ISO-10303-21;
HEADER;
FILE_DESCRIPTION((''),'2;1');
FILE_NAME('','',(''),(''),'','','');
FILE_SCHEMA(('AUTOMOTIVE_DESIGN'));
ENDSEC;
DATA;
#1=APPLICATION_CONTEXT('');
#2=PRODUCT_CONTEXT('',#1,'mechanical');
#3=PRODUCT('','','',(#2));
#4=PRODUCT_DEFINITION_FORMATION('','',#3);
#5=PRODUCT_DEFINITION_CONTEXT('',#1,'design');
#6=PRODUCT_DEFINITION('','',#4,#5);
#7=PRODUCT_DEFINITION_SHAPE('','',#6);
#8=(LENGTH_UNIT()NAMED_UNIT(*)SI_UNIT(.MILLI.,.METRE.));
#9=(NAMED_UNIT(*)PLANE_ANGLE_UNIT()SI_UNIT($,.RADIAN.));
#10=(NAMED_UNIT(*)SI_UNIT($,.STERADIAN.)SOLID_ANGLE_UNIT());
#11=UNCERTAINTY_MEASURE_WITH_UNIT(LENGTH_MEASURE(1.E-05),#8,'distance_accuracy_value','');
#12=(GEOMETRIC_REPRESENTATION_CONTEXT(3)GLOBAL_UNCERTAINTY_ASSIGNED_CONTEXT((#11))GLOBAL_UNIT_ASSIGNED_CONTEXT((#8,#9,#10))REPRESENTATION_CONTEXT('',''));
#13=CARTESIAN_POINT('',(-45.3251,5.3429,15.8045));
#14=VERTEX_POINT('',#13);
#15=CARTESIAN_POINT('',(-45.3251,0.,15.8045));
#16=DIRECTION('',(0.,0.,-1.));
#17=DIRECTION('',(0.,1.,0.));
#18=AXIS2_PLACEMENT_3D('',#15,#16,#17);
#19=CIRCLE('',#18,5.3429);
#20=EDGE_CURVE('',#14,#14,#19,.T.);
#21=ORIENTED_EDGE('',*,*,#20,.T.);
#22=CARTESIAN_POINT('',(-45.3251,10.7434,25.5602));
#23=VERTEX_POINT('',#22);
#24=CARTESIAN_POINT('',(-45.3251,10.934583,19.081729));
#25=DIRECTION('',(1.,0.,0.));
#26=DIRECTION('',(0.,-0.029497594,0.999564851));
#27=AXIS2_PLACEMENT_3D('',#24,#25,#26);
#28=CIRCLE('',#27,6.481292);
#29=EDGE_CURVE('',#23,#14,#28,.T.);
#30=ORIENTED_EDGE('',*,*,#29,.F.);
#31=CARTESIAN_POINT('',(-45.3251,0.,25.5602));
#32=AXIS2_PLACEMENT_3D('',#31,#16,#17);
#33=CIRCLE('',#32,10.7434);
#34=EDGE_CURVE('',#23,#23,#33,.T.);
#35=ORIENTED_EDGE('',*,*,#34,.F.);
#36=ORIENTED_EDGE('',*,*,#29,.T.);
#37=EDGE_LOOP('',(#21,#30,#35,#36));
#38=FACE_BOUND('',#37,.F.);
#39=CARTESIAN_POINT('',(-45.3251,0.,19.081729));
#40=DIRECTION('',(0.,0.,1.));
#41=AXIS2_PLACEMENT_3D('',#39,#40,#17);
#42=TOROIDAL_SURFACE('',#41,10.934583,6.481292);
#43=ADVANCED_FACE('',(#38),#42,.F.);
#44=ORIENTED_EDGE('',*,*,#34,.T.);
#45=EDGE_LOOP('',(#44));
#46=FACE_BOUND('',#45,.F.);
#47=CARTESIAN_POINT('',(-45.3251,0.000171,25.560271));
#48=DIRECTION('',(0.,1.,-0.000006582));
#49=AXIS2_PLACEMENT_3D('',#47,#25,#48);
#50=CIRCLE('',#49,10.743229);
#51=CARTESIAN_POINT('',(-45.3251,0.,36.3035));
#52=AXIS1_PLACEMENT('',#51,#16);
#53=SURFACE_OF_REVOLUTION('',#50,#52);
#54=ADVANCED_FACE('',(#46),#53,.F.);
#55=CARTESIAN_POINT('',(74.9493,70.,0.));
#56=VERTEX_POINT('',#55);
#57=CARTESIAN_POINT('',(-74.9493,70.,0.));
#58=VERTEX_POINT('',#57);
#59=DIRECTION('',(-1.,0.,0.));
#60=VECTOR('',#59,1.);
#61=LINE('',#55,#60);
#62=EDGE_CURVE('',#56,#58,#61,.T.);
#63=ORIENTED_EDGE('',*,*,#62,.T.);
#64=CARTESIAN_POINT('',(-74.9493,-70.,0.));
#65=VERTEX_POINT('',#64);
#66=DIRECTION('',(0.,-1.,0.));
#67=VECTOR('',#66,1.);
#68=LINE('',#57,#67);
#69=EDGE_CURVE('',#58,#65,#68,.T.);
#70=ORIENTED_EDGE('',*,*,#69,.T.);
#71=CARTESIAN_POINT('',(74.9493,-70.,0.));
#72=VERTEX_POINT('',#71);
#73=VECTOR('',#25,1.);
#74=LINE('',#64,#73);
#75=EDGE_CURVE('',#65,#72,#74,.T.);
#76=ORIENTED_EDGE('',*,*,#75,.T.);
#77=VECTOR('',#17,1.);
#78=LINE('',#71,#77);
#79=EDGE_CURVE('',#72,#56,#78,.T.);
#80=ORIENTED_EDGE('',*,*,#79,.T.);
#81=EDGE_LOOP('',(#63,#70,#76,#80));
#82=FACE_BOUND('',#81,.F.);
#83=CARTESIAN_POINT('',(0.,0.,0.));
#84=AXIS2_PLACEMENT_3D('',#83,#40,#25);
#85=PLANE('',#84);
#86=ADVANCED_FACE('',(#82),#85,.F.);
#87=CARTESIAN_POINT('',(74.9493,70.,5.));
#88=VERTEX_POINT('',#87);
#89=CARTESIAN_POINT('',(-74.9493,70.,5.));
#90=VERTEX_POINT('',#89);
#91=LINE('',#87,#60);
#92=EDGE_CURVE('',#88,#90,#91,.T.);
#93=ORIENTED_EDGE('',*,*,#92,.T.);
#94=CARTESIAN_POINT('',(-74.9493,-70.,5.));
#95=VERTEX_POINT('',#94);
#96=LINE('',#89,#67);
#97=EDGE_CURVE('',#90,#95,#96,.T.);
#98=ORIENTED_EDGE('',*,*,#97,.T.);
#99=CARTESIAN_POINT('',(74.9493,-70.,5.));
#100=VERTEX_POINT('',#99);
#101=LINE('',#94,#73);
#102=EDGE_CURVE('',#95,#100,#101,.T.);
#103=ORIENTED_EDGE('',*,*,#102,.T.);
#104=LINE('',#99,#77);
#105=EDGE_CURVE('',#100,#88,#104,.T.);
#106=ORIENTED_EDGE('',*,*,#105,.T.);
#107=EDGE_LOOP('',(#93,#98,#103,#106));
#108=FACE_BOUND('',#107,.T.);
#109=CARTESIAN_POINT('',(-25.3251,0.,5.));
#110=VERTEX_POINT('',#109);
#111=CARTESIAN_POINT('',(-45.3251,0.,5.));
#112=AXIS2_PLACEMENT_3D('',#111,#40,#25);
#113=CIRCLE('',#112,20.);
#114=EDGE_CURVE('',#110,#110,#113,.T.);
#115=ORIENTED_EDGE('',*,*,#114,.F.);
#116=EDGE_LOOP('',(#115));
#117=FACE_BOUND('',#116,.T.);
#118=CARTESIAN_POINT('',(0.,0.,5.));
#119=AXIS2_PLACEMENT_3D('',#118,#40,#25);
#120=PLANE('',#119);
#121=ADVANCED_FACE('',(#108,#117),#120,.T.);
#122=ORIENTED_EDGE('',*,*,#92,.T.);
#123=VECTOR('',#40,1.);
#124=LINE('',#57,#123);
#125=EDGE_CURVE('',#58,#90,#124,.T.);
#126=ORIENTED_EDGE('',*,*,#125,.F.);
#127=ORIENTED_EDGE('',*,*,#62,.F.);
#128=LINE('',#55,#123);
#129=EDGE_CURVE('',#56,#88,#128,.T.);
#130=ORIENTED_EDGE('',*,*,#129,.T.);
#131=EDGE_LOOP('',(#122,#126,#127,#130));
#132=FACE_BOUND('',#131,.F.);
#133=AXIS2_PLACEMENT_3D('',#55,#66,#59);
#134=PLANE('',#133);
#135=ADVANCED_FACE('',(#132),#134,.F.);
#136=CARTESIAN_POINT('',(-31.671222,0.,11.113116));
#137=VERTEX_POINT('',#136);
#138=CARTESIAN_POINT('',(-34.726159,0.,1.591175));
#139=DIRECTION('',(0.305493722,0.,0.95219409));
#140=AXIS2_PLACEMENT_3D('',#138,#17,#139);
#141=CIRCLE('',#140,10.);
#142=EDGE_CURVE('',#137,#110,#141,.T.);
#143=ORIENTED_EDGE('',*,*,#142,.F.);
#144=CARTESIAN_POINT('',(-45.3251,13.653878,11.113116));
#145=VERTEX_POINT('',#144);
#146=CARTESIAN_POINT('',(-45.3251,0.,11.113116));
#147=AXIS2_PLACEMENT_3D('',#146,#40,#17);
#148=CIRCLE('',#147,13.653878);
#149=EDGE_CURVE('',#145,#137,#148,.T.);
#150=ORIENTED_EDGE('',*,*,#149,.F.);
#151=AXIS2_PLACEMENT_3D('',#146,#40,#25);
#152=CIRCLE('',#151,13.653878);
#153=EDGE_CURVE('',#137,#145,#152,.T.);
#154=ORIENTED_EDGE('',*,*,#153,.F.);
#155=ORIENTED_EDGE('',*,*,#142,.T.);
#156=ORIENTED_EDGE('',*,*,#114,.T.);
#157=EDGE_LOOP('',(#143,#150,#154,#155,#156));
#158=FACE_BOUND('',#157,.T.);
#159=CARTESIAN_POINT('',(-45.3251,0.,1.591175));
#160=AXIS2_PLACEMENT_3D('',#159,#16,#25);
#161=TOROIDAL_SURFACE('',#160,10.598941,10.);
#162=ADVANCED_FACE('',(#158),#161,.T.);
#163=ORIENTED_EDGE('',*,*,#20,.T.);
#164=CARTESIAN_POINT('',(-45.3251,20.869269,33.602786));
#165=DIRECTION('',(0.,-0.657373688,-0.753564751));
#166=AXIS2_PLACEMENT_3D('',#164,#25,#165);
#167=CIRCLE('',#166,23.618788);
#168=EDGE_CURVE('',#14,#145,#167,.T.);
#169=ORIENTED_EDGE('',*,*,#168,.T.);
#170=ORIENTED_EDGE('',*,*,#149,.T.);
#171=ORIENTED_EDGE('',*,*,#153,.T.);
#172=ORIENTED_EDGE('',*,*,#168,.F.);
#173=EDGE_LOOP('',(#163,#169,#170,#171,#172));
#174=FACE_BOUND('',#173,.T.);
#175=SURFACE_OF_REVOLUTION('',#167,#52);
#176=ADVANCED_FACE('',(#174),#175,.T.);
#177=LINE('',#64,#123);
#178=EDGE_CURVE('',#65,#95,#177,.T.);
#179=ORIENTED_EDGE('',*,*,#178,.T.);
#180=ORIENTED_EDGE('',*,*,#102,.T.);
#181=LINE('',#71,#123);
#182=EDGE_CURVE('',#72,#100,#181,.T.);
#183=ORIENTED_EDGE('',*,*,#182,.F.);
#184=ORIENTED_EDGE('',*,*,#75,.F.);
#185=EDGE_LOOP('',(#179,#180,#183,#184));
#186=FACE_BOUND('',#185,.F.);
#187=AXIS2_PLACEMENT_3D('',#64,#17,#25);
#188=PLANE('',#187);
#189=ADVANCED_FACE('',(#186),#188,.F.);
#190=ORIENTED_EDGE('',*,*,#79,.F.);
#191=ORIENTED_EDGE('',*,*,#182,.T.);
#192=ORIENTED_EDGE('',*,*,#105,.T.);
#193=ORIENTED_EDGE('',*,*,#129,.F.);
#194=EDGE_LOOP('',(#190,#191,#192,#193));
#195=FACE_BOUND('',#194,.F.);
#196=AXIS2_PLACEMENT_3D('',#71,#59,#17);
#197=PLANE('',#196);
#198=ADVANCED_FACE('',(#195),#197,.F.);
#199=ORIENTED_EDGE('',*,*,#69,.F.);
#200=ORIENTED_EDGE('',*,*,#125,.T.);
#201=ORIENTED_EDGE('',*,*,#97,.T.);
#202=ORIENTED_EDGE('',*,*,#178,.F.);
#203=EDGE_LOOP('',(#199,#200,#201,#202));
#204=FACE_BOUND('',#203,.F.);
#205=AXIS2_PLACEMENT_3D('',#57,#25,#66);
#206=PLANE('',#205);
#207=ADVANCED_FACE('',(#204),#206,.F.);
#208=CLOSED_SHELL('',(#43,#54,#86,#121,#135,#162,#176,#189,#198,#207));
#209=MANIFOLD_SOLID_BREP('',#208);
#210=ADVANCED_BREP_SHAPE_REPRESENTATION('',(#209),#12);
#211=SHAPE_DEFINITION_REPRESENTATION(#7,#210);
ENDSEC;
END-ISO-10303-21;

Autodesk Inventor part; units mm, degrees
ref_plane "YZ Plane" through (0, 0, 0) normal (1, 0, 0) x (0, 1, 0)
ref_plane "XZ Plane" through (0, 0, 0) normal (0, 1, 0) x (-1, 0, 0)
ref_plane "XY Plane" through (0, 0, 0) normal (0, 0, 1) x (1, 0, 0)
sketch "Sketch1" plane through (0, 0, 0) normal (0, 0, 1) x (1, 0, 0)
  line L0 (74.9493, 70) -> (-74.9493, 70)
  line L1 (-74.9493, 70) -> (-74.9493, -70)
  line L2 (-74.9493, -70) -> (74.9493, -70)
  line L3 (74.9493, -70) -> (74.9493, 70)
  line L4 (86.9493, 80) -> (86.9493, -80) projected
  line L5 (-86.9493, 80) -> (86.9493, 80) projected
  line L6 (86.9493, -80) -> (-86.9493, -80) projected
  line L7 (-86.9493, -80) -> (-86.9493, 80) projected
  point P0 (0, 0)
  dimension "d0" = 12
  dimension "d1" = 12
  dimension "d2" = 10
  dimension "d3" = 10
extrude "Extrusion1" add sketch "Sketch1" along normal blind 5 contours L3 L2 L1 L0
sketch "Sketch2" plane through (0, 0, 5) normal (0, 0, 1) x (1, 0, 0)
  circle A0 centre (-45.3251, 0) radius 20
  point P0 (0, 0)
  dimension "d6" = 40
extrude "Extrusion2" add sketch "Sketch2" along normal blind 5
ref_plane "Work Plane1" through (-45.3251, 0, 10) normal (1, 0, 0) x (0, 0, 1)
sketch "Sketch3" plane through (-45.3251, 0, 10) normal (1, 0, 0) x (0, 0, 1)
  line L0 (-5, -20) -> (0, -20) projected
  arc A0 (5.8045, -5.3429) -> (0, -20) centre (23.603, -20.8694) ccw
  arc A1 (15.5602, -10.7434) -> (5.8045, -5.3429) centre (9.0817, -10.9346) ccw
  arc A2 (15.5602, -10.7434) -> (26.3035, 0) centre (15.5602, 0) ccw
  line L1 (0, -20) -> (0, 20) projected
  line L2 (0, -20) -> (0, 0)
  line L3 (26.3035, 0) -> (0, 0)
  point P0 (-10, 0)
revolve "Revolution1" add sketch "Sketch3" angle 360 about axis through (-45.3251, 0, 36.3035) along (0, 0, -1)
fillet "Fillet1" radius 10 2 edges at (-31.1829, 14.1421, 10) (-59.4672, -14.1421, 10)
properties part number "klep uitlaat"
